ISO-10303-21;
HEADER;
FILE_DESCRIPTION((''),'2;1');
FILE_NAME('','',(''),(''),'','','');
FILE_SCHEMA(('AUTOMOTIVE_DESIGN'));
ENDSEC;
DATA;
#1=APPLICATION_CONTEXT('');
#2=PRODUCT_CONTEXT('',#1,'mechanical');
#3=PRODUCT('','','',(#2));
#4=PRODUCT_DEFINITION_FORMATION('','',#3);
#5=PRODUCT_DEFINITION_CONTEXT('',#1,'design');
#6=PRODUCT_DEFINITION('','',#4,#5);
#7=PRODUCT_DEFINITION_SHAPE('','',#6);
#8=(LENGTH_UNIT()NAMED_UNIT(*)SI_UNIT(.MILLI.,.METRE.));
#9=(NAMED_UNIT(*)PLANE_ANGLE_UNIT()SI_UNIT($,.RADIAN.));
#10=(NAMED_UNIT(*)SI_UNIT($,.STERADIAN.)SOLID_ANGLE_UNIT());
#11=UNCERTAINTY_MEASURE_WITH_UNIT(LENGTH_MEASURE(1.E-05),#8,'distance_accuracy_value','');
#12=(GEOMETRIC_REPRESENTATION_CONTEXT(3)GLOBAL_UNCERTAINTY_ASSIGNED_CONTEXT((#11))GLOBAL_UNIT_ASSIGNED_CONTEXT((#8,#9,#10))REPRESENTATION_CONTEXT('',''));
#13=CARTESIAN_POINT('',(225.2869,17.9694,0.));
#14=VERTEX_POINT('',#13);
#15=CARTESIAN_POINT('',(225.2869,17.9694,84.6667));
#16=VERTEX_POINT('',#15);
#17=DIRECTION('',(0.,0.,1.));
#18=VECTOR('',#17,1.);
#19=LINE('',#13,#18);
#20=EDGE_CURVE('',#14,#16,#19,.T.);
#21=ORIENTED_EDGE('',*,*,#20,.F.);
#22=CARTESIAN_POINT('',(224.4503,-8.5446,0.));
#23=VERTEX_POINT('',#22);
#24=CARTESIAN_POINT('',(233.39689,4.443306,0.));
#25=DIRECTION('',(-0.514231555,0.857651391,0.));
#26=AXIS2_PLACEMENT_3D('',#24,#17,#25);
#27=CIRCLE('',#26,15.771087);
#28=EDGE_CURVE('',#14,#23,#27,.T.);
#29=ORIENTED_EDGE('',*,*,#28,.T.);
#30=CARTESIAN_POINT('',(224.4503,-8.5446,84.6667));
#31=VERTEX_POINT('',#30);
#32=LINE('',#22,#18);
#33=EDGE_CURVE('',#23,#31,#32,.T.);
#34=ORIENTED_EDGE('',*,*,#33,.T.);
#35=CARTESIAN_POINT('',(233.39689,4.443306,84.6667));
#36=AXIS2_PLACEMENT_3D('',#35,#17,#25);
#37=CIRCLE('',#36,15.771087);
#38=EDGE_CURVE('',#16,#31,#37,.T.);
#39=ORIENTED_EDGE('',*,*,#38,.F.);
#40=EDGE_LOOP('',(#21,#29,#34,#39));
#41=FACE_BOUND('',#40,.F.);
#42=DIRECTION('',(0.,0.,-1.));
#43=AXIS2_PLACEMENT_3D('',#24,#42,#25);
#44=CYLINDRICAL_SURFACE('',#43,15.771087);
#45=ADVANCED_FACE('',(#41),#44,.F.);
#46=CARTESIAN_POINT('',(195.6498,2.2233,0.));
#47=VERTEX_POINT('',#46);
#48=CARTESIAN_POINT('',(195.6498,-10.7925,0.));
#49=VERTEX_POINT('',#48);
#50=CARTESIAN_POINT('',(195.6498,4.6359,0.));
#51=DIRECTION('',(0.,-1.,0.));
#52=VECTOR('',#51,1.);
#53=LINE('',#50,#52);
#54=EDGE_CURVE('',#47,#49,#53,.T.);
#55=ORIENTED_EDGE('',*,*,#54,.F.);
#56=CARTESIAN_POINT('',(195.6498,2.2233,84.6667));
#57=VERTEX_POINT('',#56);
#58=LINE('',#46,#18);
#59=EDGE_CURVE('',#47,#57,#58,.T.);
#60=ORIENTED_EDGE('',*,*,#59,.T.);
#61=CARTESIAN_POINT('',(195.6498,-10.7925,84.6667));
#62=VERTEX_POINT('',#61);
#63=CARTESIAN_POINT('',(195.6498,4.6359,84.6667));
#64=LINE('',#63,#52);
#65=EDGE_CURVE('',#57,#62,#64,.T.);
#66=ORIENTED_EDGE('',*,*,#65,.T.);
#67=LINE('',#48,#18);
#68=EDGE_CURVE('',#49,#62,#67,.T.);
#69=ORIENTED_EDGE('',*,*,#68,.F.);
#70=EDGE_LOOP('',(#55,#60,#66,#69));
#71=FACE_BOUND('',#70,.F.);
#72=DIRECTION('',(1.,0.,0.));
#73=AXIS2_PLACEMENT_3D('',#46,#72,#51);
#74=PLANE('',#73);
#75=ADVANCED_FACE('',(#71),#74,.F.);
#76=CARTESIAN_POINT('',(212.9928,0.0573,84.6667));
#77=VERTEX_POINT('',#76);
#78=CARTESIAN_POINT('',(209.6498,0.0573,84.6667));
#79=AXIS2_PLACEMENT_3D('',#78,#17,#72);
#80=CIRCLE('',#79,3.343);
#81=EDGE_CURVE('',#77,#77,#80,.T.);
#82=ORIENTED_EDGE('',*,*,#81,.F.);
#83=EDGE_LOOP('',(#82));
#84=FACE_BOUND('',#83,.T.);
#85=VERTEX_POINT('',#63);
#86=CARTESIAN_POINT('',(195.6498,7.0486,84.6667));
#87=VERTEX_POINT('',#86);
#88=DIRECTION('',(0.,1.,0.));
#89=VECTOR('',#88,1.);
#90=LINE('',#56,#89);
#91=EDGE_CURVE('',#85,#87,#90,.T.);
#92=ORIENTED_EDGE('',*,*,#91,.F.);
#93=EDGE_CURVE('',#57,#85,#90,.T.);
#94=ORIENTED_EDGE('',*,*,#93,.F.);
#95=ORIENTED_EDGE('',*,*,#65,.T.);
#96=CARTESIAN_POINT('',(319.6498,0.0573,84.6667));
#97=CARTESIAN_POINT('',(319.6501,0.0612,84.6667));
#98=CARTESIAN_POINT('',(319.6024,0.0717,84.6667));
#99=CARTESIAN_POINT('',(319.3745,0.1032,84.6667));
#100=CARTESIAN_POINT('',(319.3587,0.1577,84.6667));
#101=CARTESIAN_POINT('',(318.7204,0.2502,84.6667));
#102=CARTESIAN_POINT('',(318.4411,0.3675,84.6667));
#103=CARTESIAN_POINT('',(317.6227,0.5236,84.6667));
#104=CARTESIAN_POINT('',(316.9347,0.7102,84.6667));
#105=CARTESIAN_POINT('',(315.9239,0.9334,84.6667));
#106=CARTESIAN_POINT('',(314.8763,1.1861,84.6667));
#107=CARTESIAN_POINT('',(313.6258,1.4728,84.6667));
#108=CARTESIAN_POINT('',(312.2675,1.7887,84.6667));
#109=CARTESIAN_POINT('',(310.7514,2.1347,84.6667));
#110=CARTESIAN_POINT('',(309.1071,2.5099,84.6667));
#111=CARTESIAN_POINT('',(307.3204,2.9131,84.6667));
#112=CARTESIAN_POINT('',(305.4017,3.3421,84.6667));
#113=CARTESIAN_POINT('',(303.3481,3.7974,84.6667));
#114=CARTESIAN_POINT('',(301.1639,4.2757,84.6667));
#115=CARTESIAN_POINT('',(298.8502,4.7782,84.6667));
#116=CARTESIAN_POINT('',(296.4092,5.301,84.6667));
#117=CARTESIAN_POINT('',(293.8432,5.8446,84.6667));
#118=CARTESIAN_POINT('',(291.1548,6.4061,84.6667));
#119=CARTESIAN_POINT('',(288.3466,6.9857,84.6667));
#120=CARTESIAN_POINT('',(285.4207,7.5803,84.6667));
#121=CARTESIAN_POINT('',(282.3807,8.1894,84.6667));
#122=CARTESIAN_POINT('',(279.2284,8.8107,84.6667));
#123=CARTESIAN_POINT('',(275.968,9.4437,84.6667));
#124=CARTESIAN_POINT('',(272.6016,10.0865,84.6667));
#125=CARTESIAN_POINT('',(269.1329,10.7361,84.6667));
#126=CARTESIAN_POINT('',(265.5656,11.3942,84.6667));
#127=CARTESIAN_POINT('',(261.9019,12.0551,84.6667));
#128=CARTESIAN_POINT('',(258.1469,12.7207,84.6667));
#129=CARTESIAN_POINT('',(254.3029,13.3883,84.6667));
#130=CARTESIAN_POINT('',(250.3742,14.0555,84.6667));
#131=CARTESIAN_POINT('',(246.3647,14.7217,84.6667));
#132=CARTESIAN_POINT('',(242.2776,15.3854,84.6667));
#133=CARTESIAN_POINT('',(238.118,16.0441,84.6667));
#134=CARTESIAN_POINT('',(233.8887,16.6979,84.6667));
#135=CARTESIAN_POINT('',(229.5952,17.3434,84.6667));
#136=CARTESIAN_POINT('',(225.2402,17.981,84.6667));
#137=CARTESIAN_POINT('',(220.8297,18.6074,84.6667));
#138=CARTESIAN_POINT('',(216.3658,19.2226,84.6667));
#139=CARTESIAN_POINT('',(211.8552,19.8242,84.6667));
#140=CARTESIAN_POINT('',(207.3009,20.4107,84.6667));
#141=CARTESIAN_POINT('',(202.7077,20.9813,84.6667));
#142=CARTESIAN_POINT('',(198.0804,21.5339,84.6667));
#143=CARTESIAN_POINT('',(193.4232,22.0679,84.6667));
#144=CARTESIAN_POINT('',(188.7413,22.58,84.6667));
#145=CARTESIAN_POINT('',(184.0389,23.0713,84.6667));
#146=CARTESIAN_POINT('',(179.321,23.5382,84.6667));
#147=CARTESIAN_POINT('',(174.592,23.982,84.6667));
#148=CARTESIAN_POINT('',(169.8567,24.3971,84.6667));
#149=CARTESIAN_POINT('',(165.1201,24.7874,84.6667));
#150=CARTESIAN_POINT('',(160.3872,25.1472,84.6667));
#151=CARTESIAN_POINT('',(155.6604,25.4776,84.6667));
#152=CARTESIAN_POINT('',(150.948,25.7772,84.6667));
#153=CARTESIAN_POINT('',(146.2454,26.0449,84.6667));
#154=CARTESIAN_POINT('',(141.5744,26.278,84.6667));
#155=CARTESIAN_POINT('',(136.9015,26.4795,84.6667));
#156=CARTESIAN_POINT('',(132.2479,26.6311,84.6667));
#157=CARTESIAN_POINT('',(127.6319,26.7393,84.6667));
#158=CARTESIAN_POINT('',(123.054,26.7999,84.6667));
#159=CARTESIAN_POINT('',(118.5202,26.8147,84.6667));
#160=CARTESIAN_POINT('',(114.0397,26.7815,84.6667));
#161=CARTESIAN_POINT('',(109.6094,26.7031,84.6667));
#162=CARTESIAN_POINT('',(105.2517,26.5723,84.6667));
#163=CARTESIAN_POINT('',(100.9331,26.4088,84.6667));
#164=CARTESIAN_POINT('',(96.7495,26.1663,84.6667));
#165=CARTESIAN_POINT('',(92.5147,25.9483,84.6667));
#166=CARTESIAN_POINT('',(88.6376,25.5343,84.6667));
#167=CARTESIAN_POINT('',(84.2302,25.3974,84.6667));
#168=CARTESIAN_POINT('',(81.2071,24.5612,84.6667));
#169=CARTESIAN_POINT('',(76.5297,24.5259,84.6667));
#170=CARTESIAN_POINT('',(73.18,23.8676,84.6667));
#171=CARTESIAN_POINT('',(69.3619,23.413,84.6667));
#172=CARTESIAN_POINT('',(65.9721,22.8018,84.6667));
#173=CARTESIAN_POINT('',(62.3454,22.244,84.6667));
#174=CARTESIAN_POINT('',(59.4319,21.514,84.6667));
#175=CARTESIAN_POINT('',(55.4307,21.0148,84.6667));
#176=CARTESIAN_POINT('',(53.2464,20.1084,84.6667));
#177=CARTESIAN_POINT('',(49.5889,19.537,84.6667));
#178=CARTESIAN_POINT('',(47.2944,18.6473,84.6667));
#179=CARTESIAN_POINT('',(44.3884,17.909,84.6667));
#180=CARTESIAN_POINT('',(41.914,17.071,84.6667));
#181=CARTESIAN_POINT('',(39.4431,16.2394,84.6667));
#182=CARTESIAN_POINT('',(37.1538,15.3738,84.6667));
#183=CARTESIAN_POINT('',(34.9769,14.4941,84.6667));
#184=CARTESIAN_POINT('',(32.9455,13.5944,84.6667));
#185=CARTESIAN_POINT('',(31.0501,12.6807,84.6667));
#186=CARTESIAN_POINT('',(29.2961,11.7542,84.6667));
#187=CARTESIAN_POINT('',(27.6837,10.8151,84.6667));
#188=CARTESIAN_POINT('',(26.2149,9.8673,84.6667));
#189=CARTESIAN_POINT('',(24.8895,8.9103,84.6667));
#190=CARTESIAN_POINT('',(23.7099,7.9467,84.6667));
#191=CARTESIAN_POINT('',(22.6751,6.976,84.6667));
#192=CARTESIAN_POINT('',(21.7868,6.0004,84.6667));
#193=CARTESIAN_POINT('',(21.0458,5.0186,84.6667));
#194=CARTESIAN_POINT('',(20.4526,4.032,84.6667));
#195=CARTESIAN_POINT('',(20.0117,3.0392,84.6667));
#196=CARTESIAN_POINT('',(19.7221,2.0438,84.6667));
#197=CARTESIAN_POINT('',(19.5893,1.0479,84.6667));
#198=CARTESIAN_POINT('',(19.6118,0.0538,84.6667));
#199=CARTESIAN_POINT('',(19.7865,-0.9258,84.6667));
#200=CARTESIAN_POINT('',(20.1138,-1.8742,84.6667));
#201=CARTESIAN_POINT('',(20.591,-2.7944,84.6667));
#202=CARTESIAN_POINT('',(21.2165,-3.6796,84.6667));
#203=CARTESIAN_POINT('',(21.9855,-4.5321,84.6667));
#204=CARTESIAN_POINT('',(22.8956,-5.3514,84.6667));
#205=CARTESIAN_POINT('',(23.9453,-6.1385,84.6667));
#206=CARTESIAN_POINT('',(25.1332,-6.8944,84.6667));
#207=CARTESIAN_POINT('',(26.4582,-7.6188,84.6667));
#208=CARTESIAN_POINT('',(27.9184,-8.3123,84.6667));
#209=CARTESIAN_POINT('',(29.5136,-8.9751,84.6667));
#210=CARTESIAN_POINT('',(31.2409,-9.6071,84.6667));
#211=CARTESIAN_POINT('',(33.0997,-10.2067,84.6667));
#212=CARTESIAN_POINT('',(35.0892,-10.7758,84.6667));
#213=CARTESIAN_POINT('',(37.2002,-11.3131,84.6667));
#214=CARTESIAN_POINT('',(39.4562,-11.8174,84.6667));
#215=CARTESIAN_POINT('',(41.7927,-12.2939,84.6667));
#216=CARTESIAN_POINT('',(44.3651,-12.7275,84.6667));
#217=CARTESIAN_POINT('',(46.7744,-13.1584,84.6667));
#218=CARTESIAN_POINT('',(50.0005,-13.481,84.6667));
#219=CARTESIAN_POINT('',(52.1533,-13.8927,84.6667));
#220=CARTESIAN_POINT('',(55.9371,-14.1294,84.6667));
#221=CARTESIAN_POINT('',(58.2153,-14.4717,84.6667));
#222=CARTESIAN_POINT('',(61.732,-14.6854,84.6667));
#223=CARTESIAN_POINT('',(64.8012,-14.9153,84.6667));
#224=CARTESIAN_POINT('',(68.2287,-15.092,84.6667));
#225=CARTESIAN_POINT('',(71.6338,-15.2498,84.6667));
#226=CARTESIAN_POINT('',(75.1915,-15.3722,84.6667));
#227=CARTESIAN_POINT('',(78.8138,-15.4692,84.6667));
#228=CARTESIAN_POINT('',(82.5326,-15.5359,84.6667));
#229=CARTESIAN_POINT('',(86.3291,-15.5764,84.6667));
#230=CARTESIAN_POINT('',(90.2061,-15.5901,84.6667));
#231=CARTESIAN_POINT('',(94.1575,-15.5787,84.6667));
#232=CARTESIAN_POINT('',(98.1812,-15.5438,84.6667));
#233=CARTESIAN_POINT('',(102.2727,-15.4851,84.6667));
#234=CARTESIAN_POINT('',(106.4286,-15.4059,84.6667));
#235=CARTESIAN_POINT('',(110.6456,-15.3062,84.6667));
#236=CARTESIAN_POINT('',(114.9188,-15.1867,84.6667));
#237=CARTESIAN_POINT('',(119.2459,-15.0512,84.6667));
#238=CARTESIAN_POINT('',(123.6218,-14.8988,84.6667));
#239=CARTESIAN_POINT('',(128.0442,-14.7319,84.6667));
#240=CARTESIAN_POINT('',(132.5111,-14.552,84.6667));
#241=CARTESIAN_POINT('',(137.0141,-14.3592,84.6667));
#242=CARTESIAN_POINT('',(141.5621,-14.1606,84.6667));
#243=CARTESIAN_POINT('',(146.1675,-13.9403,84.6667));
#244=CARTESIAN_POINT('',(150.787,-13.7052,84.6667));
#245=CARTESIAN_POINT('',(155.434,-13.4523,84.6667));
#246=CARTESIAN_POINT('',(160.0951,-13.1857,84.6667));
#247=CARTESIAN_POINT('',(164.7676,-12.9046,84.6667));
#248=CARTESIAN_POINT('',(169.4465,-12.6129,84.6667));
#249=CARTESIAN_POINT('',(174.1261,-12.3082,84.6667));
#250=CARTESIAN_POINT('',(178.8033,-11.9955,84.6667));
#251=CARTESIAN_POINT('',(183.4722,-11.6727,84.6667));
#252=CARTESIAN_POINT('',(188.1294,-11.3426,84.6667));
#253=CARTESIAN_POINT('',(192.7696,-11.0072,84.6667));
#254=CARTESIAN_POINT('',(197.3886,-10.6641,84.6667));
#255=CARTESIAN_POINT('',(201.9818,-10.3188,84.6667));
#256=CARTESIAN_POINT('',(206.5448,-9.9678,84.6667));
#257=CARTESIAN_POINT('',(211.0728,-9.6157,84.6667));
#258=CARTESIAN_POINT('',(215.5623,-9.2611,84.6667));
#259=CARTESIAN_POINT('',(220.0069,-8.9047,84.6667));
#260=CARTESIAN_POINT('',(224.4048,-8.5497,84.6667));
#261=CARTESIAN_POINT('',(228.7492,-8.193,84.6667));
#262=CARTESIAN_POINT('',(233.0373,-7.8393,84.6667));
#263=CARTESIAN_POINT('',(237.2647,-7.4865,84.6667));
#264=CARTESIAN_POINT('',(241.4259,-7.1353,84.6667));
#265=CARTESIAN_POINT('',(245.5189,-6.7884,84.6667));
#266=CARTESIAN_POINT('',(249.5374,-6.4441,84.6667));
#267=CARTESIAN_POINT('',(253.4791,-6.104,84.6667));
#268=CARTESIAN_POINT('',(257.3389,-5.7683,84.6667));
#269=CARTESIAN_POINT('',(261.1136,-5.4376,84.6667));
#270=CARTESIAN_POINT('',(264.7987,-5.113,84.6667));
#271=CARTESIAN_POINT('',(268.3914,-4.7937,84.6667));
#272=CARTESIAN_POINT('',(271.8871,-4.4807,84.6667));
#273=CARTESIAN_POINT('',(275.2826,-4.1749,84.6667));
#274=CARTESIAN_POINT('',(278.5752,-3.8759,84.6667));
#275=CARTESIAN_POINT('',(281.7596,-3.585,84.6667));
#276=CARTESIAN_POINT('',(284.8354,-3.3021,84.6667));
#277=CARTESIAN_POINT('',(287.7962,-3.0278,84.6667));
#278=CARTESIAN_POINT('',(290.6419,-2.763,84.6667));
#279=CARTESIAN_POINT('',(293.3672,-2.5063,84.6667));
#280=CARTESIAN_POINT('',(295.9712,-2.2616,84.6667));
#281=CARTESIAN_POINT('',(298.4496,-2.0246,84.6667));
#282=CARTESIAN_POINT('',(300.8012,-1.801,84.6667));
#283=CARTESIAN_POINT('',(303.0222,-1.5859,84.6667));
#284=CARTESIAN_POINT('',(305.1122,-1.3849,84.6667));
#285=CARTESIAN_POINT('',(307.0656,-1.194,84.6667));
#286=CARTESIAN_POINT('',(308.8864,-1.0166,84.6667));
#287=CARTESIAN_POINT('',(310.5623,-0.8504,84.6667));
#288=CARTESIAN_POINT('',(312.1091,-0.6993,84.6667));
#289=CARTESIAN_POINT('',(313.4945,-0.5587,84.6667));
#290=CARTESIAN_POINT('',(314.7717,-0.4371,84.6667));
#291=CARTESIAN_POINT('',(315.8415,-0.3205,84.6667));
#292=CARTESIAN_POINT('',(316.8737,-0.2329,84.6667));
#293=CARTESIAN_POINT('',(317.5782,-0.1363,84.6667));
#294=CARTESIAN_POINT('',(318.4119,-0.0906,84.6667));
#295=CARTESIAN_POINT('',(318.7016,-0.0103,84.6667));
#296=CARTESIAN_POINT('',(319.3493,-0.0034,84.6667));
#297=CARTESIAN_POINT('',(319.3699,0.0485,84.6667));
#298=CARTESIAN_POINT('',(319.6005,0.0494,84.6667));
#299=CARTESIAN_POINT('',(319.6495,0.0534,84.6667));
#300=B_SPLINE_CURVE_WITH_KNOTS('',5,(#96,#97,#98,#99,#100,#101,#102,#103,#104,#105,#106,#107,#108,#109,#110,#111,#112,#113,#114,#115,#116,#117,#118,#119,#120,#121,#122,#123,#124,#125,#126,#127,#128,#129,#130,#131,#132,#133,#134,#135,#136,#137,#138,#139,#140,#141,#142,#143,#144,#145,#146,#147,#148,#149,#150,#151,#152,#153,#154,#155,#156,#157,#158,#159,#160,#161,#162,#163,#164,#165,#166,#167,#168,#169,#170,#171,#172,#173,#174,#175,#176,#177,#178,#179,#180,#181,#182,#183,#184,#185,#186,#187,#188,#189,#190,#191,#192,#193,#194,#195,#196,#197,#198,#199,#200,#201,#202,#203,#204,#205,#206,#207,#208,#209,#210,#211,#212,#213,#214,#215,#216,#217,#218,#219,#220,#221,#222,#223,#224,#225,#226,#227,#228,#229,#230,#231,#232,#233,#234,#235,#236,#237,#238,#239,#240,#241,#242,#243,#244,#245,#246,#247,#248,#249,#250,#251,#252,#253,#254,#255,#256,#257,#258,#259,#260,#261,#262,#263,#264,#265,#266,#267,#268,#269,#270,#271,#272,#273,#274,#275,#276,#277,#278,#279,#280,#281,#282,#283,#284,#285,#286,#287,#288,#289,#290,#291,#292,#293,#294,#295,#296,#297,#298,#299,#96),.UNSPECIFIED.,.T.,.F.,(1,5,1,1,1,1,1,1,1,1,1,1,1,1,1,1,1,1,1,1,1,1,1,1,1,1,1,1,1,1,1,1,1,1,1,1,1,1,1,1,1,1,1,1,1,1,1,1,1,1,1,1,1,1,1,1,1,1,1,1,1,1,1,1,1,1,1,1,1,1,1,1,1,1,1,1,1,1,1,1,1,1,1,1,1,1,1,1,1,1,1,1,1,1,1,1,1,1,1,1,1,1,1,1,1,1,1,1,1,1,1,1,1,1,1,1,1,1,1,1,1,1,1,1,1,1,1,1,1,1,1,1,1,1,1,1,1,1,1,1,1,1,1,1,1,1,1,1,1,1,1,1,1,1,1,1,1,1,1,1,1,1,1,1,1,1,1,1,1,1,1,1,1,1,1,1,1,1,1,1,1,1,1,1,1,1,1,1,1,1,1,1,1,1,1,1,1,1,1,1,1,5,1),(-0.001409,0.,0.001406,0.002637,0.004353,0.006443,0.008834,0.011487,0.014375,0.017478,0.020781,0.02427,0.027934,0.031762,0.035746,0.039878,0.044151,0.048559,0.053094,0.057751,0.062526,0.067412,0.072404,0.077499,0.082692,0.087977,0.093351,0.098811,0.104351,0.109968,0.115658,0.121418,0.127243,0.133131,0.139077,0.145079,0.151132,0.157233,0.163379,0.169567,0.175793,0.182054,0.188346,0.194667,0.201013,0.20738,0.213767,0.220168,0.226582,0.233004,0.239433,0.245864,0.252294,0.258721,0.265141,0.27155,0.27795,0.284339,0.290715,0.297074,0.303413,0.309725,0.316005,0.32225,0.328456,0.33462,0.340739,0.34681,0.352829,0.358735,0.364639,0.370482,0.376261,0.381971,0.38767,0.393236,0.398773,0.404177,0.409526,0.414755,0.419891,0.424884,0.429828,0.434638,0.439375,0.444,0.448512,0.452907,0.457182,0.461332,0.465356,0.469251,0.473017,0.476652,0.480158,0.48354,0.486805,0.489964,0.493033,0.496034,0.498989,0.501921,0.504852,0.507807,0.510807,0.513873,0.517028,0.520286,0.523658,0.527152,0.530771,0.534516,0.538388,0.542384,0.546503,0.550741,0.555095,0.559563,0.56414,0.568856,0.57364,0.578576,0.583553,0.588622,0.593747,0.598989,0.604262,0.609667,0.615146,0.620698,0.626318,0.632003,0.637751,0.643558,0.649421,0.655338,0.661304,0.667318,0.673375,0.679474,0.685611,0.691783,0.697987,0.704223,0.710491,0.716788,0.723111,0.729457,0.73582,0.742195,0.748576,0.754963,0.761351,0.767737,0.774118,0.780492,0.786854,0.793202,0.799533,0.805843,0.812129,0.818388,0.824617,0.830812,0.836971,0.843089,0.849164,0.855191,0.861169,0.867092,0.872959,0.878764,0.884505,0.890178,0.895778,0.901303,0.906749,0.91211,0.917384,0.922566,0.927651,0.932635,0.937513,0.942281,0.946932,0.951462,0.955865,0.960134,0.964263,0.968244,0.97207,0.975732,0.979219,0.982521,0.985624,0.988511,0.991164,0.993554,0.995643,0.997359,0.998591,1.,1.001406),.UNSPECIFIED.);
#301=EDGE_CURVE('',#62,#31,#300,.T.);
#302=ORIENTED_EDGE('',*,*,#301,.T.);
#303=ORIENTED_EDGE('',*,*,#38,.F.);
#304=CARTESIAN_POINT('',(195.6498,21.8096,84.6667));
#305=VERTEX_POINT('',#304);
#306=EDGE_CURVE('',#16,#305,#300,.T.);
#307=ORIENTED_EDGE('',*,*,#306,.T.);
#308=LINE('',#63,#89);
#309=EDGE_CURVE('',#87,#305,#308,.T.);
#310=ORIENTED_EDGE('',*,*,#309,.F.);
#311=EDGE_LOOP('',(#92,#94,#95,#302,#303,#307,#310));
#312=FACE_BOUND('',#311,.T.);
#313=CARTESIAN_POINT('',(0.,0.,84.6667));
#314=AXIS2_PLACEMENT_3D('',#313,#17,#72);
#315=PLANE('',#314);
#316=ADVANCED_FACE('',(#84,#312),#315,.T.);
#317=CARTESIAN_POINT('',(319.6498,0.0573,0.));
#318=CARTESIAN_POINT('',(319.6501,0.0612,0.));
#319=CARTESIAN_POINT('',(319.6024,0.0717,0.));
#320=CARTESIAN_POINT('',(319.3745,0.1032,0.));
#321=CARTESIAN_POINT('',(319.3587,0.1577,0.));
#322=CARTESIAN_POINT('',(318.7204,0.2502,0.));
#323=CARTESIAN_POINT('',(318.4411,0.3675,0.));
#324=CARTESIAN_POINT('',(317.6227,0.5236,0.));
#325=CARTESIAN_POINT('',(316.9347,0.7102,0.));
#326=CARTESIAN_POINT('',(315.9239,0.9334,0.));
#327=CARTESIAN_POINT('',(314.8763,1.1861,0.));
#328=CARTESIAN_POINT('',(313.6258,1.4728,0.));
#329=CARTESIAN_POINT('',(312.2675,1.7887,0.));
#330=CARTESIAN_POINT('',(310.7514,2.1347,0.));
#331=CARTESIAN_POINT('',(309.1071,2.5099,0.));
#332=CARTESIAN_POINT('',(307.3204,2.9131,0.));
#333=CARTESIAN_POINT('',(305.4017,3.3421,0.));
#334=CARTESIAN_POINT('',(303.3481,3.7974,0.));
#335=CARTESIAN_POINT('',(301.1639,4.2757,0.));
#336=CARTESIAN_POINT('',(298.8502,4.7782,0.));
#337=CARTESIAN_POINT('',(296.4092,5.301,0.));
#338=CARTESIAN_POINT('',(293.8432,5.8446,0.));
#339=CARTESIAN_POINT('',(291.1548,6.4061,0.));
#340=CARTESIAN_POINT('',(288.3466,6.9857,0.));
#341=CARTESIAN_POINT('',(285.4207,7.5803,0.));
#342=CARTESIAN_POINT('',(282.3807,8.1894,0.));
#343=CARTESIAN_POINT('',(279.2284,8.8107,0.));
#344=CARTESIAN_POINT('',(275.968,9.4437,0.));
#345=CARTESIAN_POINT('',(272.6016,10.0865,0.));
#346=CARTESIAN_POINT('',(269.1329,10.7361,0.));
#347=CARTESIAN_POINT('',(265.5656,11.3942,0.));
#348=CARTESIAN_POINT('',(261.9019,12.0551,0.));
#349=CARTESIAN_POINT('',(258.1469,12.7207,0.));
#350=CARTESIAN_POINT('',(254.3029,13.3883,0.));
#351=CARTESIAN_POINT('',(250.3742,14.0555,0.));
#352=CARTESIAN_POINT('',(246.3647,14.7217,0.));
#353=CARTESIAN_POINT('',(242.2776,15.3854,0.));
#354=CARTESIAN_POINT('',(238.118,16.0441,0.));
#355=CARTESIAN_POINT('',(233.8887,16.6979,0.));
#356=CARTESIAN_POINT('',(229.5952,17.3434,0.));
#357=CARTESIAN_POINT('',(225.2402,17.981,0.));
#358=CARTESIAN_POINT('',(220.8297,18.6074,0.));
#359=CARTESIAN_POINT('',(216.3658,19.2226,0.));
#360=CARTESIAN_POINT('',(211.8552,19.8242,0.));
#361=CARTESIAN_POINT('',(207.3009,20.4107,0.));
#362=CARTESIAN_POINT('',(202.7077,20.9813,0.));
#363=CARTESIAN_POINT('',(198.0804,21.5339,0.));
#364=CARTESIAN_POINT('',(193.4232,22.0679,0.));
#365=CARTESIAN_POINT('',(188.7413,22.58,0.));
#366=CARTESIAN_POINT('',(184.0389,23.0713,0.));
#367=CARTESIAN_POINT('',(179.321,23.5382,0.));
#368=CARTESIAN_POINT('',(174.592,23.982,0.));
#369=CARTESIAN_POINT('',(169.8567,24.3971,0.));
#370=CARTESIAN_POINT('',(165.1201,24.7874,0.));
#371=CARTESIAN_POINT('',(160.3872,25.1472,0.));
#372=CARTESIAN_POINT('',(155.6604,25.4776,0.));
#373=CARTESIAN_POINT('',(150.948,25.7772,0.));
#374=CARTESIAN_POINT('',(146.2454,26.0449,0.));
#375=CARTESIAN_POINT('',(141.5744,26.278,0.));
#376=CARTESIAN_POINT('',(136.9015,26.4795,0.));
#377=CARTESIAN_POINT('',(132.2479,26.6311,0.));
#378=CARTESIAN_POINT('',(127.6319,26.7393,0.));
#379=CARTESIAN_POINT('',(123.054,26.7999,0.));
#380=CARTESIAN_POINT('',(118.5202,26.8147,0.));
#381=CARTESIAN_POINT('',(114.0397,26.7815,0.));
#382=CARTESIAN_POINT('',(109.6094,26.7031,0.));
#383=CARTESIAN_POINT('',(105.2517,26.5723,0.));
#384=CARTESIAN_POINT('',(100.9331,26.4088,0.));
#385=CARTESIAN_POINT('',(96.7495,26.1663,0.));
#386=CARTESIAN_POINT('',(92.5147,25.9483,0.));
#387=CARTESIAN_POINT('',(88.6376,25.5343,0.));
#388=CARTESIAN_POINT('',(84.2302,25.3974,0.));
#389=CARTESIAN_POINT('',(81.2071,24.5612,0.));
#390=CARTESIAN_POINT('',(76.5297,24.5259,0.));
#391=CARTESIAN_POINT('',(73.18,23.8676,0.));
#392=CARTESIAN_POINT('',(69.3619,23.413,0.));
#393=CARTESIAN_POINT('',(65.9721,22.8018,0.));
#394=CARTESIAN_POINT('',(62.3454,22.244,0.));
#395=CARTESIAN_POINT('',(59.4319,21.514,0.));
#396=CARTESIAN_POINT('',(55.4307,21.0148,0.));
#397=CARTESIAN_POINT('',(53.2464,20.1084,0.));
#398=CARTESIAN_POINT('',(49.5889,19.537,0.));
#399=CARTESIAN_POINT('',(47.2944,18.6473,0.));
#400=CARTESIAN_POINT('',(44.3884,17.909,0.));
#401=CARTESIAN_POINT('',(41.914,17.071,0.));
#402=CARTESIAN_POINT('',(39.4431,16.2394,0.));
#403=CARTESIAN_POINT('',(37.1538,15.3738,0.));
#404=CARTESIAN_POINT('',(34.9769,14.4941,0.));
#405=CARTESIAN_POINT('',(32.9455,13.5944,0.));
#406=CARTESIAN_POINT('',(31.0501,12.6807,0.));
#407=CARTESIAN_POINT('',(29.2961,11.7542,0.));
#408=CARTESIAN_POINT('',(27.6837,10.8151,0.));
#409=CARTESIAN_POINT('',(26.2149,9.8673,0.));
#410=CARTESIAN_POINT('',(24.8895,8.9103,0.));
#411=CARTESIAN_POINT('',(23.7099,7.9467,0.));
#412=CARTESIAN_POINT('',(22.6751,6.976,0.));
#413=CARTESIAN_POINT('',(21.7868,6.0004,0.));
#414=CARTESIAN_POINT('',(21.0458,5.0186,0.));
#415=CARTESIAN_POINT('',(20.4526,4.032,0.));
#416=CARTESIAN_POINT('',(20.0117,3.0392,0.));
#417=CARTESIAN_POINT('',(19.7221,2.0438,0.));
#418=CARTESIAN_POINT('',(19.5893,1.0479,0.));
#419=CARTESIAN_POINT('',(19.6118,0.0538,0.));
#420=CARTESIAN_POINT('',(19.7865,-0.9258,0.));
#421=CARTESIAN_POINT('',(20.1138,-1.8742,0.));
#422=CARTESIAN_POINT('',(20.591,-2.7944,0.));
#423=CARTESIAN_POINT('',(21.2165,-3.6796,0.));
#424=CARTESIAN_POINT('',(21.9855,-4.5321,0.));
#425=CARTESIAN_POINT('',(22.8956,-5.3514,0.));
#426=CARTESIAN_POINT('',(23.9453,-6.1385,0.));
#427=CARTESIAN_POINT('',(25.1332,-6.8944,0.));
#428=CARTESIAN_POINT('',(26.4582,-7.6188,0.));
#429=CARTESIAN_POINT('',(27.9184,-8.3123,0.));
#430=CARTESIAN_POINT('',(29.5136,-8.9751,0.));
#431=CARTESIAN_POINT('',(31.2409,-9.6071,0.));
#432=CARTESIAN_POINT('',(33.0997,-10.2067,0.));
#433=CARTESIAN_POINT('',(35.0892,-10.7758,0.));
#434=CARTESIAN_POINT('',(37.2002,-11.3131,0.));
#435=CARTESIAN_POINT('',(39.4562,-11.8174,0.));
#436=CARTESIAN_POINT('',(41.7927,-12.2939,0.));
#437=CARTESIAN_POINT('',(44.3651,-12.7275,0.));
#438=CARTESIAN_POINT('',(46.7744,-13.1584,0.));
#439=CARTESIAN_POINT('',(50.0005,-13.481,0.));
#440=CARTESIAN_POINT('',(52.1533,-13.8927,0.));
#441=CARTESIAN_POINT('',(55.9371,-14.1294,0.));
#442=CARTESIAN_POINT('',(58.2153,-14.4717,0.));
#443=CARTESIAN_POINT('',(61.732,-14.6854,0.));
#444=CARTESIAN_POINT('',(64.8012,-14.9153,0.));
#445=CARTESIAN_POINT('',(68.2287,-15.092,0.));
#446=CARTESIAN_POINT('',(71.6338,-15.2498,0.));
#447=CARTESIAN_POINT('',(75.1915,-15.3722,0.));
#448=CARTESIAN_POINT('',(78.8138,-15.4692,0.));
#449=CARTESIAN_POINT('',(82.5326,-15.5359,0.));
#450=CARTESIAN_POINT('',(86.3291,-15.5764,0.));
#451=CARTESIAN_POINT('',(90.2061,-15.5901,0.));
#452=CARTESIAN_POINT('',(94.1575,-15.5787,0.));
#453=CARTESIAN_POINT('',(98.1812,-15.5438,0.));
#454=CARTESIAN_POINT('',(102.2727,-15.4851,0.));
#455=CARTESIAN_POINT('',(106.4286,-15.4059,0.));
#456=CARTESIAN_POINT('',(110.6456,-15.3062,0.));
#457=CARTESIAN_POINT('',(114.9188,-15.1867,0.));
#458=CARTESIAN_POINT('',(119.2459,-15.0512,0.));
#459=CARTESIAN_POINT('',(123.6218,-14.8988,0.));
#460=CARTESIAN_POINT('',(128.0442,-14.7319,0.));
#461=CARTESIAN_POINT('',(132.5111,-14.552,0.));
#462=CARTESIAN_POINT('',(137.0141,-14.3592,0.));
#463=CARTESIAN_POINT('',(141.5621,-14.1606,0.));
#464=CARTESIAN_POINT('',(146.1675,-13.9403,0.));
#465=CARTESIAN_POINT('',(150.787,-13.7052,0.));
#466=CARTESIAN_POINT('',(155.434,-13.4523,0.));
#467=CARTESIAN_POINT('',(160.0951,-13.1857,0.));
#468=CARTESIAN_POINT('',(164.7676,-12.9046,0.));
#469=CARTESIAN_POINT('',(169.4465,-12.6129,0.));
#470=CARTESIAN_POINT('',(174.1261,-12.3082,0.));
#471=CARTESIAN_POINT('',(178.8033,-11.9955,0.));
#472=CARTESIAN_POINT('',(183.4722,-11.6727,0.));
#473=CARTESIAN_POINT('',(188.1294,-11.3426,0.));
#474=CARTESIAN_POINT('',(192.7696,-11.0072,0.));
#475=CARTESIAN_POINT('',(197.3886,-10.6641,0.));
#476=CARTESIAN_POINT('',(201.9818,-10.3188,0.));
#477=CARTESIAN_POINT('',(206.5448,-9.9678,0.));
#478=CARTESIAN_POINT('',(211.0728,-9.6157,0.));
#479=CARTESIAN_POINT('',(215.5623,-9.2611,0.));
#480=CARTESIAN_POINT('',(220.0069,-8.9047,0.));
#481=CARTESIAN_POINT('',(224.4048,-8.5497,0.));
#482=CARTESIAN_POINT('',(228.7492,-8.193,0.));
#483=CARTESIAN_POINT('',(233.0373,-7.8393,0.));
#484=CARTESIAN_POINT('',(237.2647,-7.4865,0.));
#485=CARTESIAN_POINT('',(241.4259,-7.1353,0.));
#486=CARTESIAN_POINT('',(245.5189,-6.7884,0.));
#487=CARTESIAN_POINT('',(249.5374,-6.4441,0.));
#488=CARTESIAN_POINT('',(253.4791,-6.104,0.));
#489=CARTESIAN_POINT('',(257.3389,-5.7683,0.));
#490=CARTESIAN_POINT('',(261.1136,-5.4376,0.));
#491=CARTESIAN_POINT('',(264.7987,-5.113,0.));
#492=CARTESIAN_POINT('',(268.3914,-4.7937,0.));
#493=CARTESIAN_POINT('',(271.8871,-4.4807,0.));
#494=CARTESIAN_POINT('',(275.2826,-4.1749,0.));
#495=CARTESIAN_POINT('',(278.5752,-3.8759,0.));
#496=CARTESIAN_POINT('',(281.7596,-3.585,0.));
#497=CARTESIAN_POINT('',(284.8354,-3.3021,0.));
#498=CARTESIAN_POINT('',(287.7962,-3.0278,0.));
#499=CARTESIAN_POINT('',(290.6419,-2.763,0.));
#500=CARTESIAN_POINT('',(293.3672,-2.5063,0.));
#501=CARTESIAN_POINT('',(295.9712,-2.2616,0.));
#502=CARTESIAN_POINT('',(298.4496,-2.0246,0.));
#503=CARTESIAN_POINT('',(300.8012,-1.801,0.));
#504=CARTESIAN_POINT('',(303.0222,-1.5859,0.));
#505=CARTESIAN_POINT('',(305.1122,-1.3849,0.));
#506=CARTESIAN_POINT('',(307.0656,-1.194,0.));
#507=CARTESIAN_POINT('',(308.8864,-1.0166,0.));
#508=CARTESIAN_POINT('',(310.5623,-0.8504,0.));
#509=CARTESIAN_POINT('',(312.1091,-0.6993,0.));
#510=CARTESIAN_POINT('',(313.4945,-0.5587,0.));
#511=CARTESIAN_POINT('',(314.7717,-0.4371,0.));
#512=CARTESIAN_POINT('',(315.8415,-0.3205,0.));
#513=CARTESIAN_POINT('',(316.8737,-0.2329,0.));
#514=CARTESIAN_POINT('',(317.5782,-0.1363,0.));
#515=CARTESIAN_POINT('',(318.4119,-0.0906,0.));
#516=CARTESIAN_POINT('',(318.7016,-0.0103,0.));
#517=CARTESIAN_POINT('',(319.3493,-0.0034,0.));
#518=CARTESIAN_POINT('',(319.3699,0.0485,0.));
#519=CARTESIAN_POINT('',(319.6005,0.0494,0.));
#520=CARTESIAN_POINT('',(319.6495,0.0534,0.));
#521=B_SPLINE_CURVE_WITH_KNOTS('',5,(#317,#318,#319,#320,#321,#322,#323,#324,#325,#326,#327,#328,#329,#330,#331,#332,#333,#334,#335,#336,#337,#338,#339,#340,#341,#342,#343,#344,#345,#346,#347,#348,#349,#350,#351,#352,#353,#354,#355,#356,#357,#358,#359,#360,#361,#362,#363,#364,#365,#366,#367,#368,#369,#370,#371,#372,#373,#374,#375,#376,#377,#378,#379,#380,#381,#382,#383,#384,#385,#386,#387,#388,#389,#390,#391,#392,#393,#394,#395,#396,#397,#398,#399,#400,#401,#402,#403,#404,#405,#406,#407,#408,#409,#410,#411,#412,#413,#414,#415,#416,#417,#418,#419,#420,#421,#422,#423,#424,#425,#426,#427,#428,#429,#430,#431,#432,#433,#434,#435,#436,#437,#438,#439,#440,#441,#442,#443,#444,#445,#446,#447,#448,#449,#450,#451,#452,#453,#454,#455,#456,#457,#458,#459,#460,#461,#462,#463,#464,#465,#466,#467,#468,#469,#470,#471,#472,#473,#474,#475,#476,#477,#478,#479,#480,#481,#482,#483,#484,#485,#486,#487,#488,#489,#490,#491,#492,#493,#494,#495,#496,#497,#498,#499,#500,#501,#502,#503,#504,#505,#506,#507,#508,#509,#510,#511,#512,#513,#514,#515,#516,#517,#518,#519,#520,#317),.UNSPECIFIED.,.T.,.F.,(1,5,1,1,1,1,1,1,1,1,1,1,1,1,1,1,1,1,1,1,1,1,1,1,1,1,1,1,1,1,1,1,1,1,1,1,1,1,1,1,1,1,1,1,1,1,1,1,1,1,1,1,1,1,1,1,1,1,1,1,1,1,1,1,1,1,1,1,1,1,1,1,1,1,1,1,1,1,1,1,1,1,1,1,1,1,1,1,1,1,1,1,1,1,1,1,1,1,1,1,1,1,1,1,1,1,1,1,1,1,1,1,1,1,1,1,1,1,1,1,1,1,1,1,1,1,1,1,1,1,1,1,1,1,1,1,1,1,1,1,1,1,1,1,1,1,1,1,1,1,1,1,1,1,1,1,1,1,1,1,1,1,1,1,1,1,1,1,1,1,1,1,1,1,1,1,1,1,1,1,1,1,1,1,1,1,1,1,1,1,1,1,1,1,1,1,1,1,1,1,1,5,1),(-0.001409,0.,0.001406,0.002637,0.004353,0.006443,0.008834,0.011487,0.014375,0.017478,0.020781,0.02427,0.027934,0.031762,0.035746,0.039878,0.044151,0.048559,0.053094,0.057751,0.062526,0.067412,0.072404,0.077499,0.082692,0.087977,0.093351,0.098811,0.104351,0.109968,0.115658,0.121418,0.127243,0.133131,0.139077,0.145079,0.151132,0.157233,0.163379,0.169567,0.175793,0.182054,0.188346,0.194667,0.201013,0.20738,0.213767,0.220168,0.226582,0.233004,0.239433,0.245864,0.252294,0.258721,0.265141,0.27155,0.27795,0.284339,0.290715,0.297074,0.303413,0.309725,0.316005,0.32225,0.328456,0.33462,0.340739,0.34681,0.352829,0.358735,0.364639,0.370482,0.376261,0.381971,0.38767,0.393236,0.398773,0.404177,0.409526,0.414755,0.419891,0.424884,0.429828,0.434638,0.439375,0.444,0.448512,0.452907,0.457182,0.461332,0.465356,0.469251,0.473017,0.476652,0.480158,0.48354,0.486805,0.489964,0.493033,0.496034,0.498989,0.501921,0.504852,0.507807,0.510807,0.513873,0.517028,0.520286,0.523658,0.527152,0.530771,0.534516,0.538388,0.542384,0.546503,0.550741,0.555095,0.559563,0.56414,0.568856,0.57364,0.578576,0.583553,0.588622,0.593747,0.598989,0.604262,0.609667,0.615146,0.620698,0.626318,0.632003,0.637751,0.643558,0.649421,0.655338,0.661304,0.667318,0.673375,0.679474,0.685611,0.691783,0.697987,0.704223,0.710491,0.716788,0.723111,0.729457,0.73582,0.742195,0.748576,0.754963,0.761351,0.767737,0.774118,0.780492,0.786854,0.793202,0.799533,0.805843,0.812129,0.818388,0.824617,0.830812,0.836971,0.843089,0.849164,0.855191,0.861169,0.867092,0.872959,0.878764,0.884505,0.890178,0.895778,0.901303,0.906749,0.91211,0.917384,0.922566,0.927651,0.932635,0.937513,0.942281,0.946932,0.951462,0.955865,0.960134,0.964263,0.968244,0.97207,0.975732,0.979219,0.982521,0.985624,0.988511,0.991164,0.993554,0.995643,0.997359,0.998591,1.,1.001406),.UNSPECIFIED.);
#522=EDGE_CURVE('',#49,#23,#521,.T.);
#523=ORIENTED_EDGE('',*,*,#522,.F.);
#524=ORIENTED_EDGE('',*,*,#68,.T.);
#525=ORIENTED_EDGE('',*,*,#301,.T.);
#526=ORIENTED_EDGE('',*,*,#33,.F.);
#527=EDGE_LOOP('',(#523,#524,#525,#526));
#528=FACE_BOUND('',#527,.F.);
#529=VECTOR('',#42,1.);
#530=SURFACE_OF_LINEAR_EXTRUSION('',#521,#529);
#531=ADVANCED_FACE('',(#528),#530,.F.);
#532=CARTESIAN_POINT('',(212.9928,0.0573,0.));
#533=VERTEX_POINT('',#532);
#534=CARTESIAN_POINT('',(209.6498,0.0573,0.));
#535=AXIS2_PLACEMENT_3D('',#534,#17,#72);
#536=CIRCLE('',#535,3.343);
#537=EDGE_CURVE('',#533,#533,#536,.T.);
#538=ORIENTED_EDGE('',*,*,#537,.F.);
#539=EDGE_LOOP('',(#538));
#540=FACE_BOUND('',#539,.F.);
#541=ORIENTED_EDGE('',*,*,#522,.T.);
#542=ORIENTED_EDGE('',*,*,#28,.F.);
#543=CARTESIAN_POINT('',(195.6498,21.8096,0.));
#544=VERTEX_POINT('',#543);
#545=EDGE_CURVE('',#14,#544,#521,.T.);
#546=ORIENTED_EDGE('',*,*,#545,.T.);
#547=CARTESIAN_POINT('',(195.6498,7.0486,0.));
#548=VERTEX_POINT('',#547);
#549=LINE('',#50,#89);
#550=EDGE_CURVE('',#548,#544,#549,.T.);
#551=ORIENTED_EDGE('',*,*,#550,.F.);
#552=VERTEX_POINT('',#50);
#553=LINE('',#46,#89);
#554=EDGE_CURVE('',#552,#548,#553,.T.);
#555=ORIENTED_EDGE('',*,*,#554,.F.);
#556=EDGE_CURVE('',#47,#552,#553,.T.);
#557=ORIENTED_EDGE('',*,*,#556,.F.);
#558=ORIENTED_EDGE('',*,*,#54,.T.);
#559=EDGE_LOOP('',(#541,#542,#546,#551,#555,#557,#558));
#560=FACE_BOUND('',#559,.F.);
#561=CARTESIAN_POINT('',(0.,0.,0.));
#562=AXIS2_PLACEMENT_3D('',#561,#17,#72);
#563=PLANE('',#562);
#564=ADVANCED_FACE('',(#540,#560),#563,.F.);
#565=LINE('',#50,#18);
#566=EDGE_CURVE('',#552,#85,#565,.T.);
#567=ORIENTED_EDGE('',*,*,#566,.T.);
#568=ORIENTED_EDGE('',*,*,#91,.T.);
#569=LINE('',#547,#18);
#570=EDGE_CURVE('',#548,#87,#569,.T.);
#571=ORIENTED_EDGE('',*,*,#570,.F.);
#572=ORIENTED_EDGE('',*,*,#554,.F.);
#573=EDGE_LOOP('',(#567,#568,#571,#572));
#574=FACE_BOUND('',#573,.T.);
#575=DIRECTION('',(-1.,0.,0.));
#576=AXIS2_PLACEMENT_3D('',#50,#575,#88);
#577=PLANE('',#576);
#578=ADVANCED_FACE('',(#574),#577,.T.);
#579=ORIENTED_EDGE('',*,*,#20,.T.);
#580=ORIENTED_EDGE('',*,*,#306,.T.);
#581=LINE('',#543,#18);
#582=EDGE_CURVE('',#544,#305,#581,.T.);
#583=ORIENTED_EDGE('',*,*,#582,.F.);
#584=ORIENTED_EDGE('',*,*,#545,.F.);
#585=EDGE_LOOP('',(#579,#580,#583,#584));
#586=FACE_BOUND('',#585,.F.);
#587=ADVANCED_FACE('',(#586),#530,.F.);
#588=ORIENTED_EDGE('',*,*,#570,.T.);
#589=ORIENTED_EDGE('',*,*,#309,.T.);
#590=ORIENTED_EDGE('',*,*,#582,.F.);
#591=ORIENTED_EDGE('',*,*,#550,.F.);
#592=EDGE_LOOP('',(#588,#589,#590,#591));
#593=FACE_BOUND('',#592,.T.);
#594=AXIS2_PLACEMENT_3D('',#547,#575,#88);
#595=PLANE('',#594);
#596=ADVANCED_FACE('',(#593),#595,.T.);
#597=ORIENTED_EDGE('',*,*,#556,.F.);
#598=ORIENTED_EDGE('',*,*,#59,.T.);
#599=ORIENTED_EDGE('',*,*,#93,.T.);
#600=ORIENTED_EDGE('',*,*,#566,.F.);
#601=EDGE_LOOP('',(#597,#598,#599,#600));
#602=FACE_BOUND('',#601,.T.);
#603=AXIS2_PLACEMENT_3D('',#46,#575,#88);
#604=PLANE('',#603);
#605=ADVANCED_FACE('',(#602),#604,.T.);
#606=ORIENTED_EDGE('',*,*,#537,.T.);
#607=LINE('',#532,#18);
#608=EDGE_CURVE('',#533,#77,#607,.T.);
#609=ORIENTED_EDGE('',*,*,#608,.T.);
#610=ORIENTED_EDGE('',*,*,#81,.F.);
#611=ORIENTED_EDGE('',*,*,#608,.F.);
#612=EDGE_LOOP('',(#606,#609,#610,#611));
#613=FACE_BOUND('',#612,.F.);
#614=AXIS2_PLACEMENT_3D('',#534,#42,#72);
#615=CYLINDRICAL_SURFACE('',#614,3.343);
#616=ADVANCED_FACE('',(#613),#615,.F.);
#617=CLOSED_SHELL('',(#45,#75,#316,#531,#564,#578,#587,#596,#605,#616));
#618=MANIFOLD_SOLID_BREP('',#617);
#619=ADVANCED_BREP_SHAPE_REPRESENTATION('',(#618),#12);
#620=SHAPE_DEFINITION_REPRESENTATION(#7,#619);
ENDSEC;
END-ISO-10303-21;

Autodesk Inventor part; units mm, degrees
ref_plane "YZ Plane" through (0, 0, 0) normal (1, 0, 0) x (0, 1, 0)
ref_plane "XZ Plane" through (0, 0, 0) normal (0, 1, 0) x (-1, 0, 0)
ref_plane "XY Plane" through (0, 0, 0) normal (0, 0, 1) x (1, 0, 0)
sketch "Sketch2" plane through (0, 0, 0) normal (0, 0, 1) x (1, 0, 0)
  spline S0 degree 5 poles (319.6498, 0.0573) (319.6501, 0.0612) (319.6024, 0.0717) (319.3745, 0.1032) (319.3587, 0.1577) (318.7204, 0.2502) (318.4411, 0.3675) (317.6227, 0.5236) (316.9347, 0.7102) (315.9239, 0.9334) (314.8763, 1.1861) (313.6258, 1.4728) (312.2675, 1.7887) (310.7514, 2.1347) (309.1071, 2.5099) (307.3204, 2.9131) (305.4017, 3.3421) (303.3481, 3.7974) (301.1639, 4.2757) (298.8502, 4.7782) (296.4092, 5.301) (293.8432, 5.8446) (291.1548, 6.4061) (288.3466, 6.9857) (285.4207, 7.5803) (282.3807, 8.1894) (279.2284, 8.8107) (275.968, 9.4437) (272.6016, 10.0865) (269.1329, 10.7361) (265.5656, 11.3942) (261.9019, 12.0551) (258.1469, 12.7207) (254.3029, 13.3883) (250.3742, 14.0555) (246.3647, 14.7217) (242.2776, 15.3854) (238.118, 16.0441) (233.8887, 16.6979) (229.5952, 17.3434) (225.2402, 17.981) (220.8297, 18.6074) (216.3658, 19.2226) (211.8552, 19.8242) (207.3009, 20.4107) (202.7077, 20.9813) (198.0804, 21.5339) (193.4232, 22.0679) (188.7413, 22.58) (184.0389, 23.0713) (179.321, 23.5382) (174.592, 23.982) (169.8567, 24.3971) (165.1201, 24.7874) (160.3872, 25.1472) (155.6604, 25.4776) (150.948, 25.7772) (146.2454, 26.0449) (141.5744, 26.278) (136.9015, 26.4795) (132.2479, 26.6311) (127.6319, 26.7393) (123.054, 26.7999) (118.5202, 26.8147) (114.0397, 26.7815) (109.6094, 26.7031) (105.2517, 26.5723) (100.9331, 26.4088) (96.7495, 26.1663) (92.5147, 25.9483) (88.6376, 25.5343) (84.2302, 25.3974) (81.2071, 24.5612) (76.5297, 24.5259) (73.18, 23.8676) (69.3619, 23.413) (65.9721, 22.8018) (62.3454, 22.244) (59.4319, 21.514) (55.4307, 21.0148) (53.2464, 20.1084) (49.5889, 19.537) (47.2944, 18.6473) (44.3884, 17.909) (41.914, 17.071) (39.4431, 16.2394) (37.1538, 15.3738) (34.9769, 14.4941) (32.9455, 13.5944) (31.0501, 12.6807) (29.2961, 11.7542) (27.6837, 10.8151) (26.2149, 9.8673) (24.8895, 8.9103) (23.7099, 7.9467) (22.6751, 6.976) (21.7868, 6.0004) (21.0458, 5.0186) (20.4526, 4.032) (20.0117, 3.0392) (19.7221, 2.0438) (19.5893, 1.0479) (19.6118, 0.0538) (19.7865, -0.9258) (20.1138, -1.8742) (20.591, -2.7944) (21.2165, -3.6796) (21.9855, -4.5321) (22.8956, -5.3514) (23.9453, -6.1385) (25.1332, -6.8944) (26.4582, -7.6188) (27.9184, -8.3123) (29.5136, -8.9751) (31.2409, -9.6071) (33.0997, -10.2067) (35.0892, -10.7758) (37.2002, -11.3131) (39.4562, -11.8174) (41.7927, -12.2939) (44.3651, -12.7275) (46.7744, -13.1584) (50.0005, -13.481) (52.1533, -13.8927) (55.9371, -14.1294) (58.2153, -14.4717) (61.732, -14.6854) (64.8012, -14.9153) (68.2287, -15.092) (71.6338, -15.2498) (75.1915, -15.3722) (78.8138, -15.4692) (82.5326, -15.5359) (86.3291, -15.5764) (90.2061, -15.5901) (94.1575, -15.5787) (98.1812, -15.5438) (102.2727, -15.4851) (106.4286, -15.4059) (110.6456, -15.3062) (114.9188, -15.1867) (119.2459, -15.0512) (123.6218, -14.8988) (128.0442, -14.7319) (132.5111, -14.552) (137.0141, -14.3592) (141.5621, -14.1606) (146.1675, -13.9403) (150.787, -13.7052) (155.434, -13.4523) (160.0951, -13.1857) (164.7676, -12.9046) (169.4465, -12.6129) (174.1261, -12.3082) (178.8033, -11.9955) (183.4722, -11.6727) (188.1294, -11.3426) (192.7696, -11.0072) (197.3886, -10.6641) (201.9818, -10.3188) (206.5448, -9.9678) (211.0728, -9.6157) (215.5623, -9.2611) (220.0069, -8.9047) (224.4048, -8.5497) (228.7492, -8.193) (233.0373, -7.8393) (237.2647, -7.4865) (241.4259, -7.1353) (245.5189, -6.7884) (249.5374, -6.4441) (253.4791, -6.104) (257.3389, -5.7683) (261.1136, -5.4376) (264.7987, -5.113) (268.3914, -4.7937) (271.8871, -4.4807) (275.2826, -4.1749) (278.5752, -3.8759) (281.7596, -3.585) (284.8354, -3.3021) (287.7962, -3.0278) (290.6419, -2.763) (293.3672, -2.5063) (295.9712, -2.2616) (298.4496, -2.0246) (300.8012, -1.801) (303.0222, -1.5859) (305.1122, -1.3849) (307.0656, -1.194) (308.8864, -1.0166) (310.5623, -0.8504) (312.1091, -0.6993) (313.4945, -0.5587) (314.7717, -0.4371) (315.8415, -0.3205) (316.8737, -0.2329) (317.5782, -0.1363) (318.4119, -0.0906) (318.7016, -0.0103) (319.3493, -0.0034) (319.3699, 0.0485) (319.6005, 0.0494) (319.6495, 0.0534) (319.6498, 0.0573) knots 0 0 0 0 0 0 0.001406 0.002637 0.004353 0.006443 0.008834 0.011487 0.014375 0.017478 0.020781 0.02427 0.027934 0.031762 0.035746 0.039878 0.044151 0.048559 0.053094 0.057751 0.062526 0.067412 0.072404 0.077499 0.082692 0.087977 0.093351 0.098811 0.104351 0.109968 0.115658 0.121418 0.127243 0.133131 0.139077 0.145079 0.151132 0.157233 0.163379 0.169567 0.175793 0.182054 0.188346 0.194667 0.201013 0.20738 0.213767 0.220168 0.226582 0.233004 0.239433 0.245864 0.252294 0.258721 0.265141 0.27155 0.27795 0.284339 0.290715 0.297074 0.303413 0.309725 0.316005 0.32225 0.328456 0.33462 0.340739 0.34681 0.352829 0.358735 0.364639 0.370482 0.376261 0.381971 0.38767 0.393236 0.398773 0.404177 0.409526 0.414755 0.419891 0.424884 0.429828 0.434638 0.439375 0.444 0.448512 0.452907 0.457182 0.461332 0.465356 0.469251 0.473017 0.476652 0.480158 0.48354 0.486805 0.489964 0.493033 0.496034 0.498989 0.501921 0.504852 0.507807 0.510807 0.513873 0.517028 0.520286 0.523658 0.527152 0.530771 0.534516 0.538388 0.542384 0.546503 0.550741 0.555095 0.559563 0.56414 0.568856 0.57364 0.578576 0.583553 0.588622 0.593747 0.598989 0.604262 0.609667 0.615146 0.620698 0.626318 0.632003 0.637751 0.643558 0.649421 0.655338 0.661304 0.667318 0.673375 0.679474 0.685611 0.691783 0.697987 0.704223 0.710491 0.716788 0.723111 0.729457 0.73582 0.742195 0.748576 0.754963 0.761351 0.767737 0.774118 0.780492 0.786854 0.793202 0.799533 0.805843 0.812129 0.818388 0.824617 0.830812 0.836971 0.843089 0.849164 0.855191 0.861169 0.867092 0.872959 0.878764 0.884505 0.890178 0.895778 0.901303 0.906749 0.91211 0.917384 0.922566 0.927651 0.932635 0.937513 0.942281 0.946932 0.951462 0.955865 0.960134 0.964263 0.968244 0.97207 0.975732 0.979219 0.982521 0.985624 0.988511 0.991164 0.993554 0.995643 0.997359 0.998591 1 1 1 1 1 1
  circle A0 centre (79.5135, 4.6359) radius 11.959
  line L0 (79.5135, 4.6359) -> (79.5135, 24.6083) construction
  circle A1 centre (209.6498, 0.0573) radius 3.343
  line L1 (79.5135, 4.6359) -> (209.6498, 4.6359) construction
  line L2 (319.6498, 0.0573) -> (219.6498, 0.0573) construction
  line L3 (219.6499, 18.7671) -> (219.6499, -8.9327) construction
  line L4 (28.0055, 4.5054) -> (28.0055, -2.4946)
  line L5 (19.627, 1.0326) -> (319.6498, 0.0573) construction
  line L6 (49.7105, 14.4213) -> (55.6079, 14.4213)
  line L7 (49.7104, -8.4915) -> (55.6078, -8.4915)
  line L8 (28.0055, 4.5054) -> (49.7105, 14.4213)
  line L9 (28.0055, -2.4946) -> (49.7104, -8.4915)
  line L10 (55.6079, 14.4213) -> (55.6079, 20.8726)
  line L11 (55.6078, -8.4915) -> (55.6078, -14.1513)
  line L12 (108.6496, 16.398) -> (108.6496, -7.1261)
  line L13 (110.8735, -9.1136) -> (193.8736, 0.2359)
  line L14 (195.6498, 2.2233) -> (195.6498, 7.0486)
  line L15 (193.8736, 9.036) -> (110.8735, 18.3854)
  arc A2 (110.8735, 18.3854) -> (108.6496, 16.398) centre (110.6496, 16.398) ccw
  arc A3 (108.6496, -7.1261) -> (110.8735, -9.1136) centre (110.6496, -7.1261) ccw
  arc A4 (193.8736, 0.2359) -> (195.6498, 2.2233) centre (193.6498, 2.2233) ccw
  arc A5 (195.6498, 7.0486) -> (193.8736, 9.036) centre (193.6498, 7.0486) ccw
  arc A6 (225.2869, 17.9694) -> (224.4503, -8.5446) centre (233.3969, 4.4433) ccw
  line L16 (195.6498, 4.6359) -> (195.6498, -10.7925)
  line L17 (195.6498, 4.6359) -> (195.6498, 21.8096)
  point P0 (0, 0)
  point P1 (319.3573, 0.1272)
  point P2 (318.9918, 0.2142)
  point P3 (318.4802, 0.3354)
  point P4 (317.8238, 0.4911)
  point P5 (317.0222, 0.6801)
  point P6 (316.0769, 0.9024)
  point P7 (314.9885, 1.1568)
  point P8 (313.7582, 1.443)
  point P9 (312.3866, 1.7598)
  point P10 (310.8752, 2.1063)
  point P11 (309.2258, 2.4819)
  point P12 (307.4393, 2.8854)
  point P13 (305.5178, 3.3153)
  point P14 (303.4628, 3.7707)
  point P15 (301.2764, 4.2501)
  point P16 (298.9607, 4.7526)
  point P17 (296.5175, 5.2764)
  point P18 (293.9492, 5.8203)
  point P19 (291.2585, 6.3828)
  point P20 (288.4478, 6.9627)
  point P21 (285.5195, 7.5582)
  point P22 (282.4766, 8.1678)
  point P23 (279.3218, 8.79)
  point P24 (276.0584, 9.4236)
  point P25 (272.6891, 10.0668)
  point P26 (269.2175, 10.7178)
  point P27 (265.6469, 11.3757)
  point P28 (261.9803, 12.0381)
  point P29 (258.2219, 12.7041)
  point P30 (254.3747, 13.3722)
  point P31 (250.4426, 14.0403)
  point P32 (246.4295, 14.7072)
  point P33 (242.339, 15.3714)
  point P34 (238.1756, 16.0311)
  point P35 (233.9428, 16.6851)
  point P36 (229.6454, 17.3316)
  point P37 (220.8723, 18.5967)
  point P38 (216.4049, 19.2123)
  point P39 (211.8901, 19.8144)
  point P40 (207.332, 20.4015)
  point P41 (202.7347, 20.9724)
  point P42 (198.1034, 21.5256)
  point P43 (193.4423, 22.0596)
  point P44 (188.7563, 22.5726)
  point P45 (184.0499, 23.0637)
  point P46 (179.3279, 23.5314)
  point P47 (174.5948, 23.9745)
  point P48 (169.8554, 24.3909)
  point P49 (165.1148, 24.7803)
  point P50 (160.3775, 25.1406)
  point P51 (155.6479, 25.4709)
  point P52 (150.9316, 25.7703)
  point P53 (146.233, 26.0373)
  point P54 (141.557, 26.2707)
  point P55 (136.882, 26.4681)
  point P56 (132.2209, 26.6211)
  point P57 (127.5964, 26.7282)
  point P58 (123.0133, 26.7888)
  point P59 (118.4761, 26.8026)
  point P60 (113.9902, 26.7693)
  point P61 (109.5601, 26.6886)
  point P62 (105.191, 26.5611)
  point P63 (100.8866, 26.3866)
  point P64 (96.6524, 26.1647)
  point P65 (92.4927, 25.8975)
  point P66 (88.4121, 25.5832)
  point P67 (84.4152, 25.2282)
  point P68 (80.9052, 24.7441)
  point P69 (76.6873, 24.3761)
  point P70 (72.9635, 23.8905)
  point P71 (69.3402, 23.3611)
  point P72 (65.8208, 22.7938)
  point P73 (62.4086, 22.1883)
  point P74 (59.107, 21.5464)
  point P75 (52.8493, 20.1606)
  point P76 (49.7105, 19.4213)
  point P77 (47.0737, 18.6507)
  point P78 (44.3741, 17.8542)
  point P79 (41.8034, 17.0322)
  point P80 (39.3638, 16.1874)
  point P81 (37.0583, 15.3213)
  point P82 (34.8884, 14.4363)
  point P83 (32.8568, 13.534)
  point P84 (30.965, 12.6166)
  point P85 (29.2145, 11.686)
  point P86 (27.6071, 10.7437)
  point P87 (26.1443, 9.7921)
  point P88 (24.8269, 8.8324)
  point P89 (23.6566, 7.8664)
  point P90 (22.6336, 6.8953)
  point P91 (21.7591, 5.9209)
  point P92 (21.0334, 4.9441)
  point P93 (20.4571, 3.9661)
  point P94 (20.0308, 2.9875)
  point P95 (19.7539, 2.0098)
  point P96 (19.6496, 0.0573)
  point P97 (19.8205, -0.9033)
  point P98 (20.1376, -1.8357)
  point P99 (20.6002, -2.7402)
  point P100 (21.208, -3.6159)
  point P101 (21.9598, -4.4628)
  point P102 (22.8544, -5.2806)
  point P103 (23.8909, -6.069)
  point P104 (25.0681, -6.8277)
  point P105 (26.3846, -7.5561)
  point P106 (27.8384, -8.2539)
  point P107 (29.4284, -8.9211)
  point P108 (31.1522, -9.5571)
  point P109 (33.0086, -10.1613)
  point P110 (34.9949, -10.734)
  point P111 (37.1093, -11.2746)
  point P112 (39.3497, -11.7828)
  point P113 (41.7134, -12.2586)
  point P114 (44.198, -12.702)
  point P115 (46.8014, -13.1127)
  point P116 (49.7104, -13.4915)
  point P117 (52.3532, -13.8357)
  point P118 (58.3469, -14.4294)
  point P119 (61.5023, -14.6781)
  point P120 (64.7591, -14.8953)
  point P121 (68.1149, -15.0813)
  point P122 (71.5661, -15.237)
  point P123 (75.1094, -15.3627)
  point P124 (78.7418, -15.4596)
  point P125 (82.46, -15.528)
  point P126 (86.2607, -15.5691)
  point P127 (90.14, -15.5838)
  point P128 (94.0946, -15.5733)
  point P129 (98.1212, -15.5388)
  point P130 (102.2159, -15.4812)
  point P131 (106.3751, -15.4023)
  point P132 (110.5952, -15.303)
  point P133 (114.872, -15.1845)
  point P134 (119.2022, -15.0489)
  point P135 (123.5813, -14.8971)
  point P136 (128.006, -14.7306)
  point P137 (132.4718, -14.5509)
  point P138 (136.9748, -14.3598)
  point P139 (141.5285, -14.1576)
  point P140 (146.1365, -13.9383)
  point P141 (150.7679, -13.7022)
  point P142 (155.4191, -13.4499)
  point P143 (160.0853, -13.1829)
  point P144 (164.7617, -12.9024)
  point P145 (169.4444, -12.6099)
  point P146 (174.1283, -12.306)
  point P147 (178.8092, -11.9925)
  point P148 (183.4823, -11.67)
  point P149 (188.1434, -11.34)
  point P150 (192.7877, -11.0037)
  point P151 (197.4106, -10.6614)
  point P152 (202.0079, -10.3149)
  point P153 (206.5747, -9.9645)
  point P154 (211.1069, -9.6117)
  point P155 (215.5999, -9.2568)
  point P156 (220.0489, -8.9007)
  point P157 (228.7987, -8.1885)
  point P158 (233.0906, -7.8339)
  point P159 (237.3214, -7.4808)
  point P160 (241.4866, -7.1298)
  point P161 (245.5828, -6.7821)
  point P162 (249.6052, -6.4377)
  point P163 (253.5502, -6.0972)
  point P164 (257.4136, -5.7612)
  point P165 (261.1915, -5.4303)
  point P166 (264.88, -5.1051)
  point P167 (268.4758, -4.7856)
  point P168 (271.9747, -4.4724)
  point P169 (275.3734, -4.1661)
  point P170 (278.6686, -3.867)
  point P171 (281.8564, -3.5757)
  point P172 (284.9344, -3.2925)
  point P173 (287.8984, -3.018)
  point P174 (290.7463, -2.7525)
  point P175 (293.4745, -2.4963)
  point P176 (296.0806, -2.2503)
  point P177 (298.5616, -2.0142)
  point P178 (300.9151, -1.7892)
  point P179 (303.1387, -1.575)
  point P180 (305.23, -1.3728)
  point P181 (307.1866, -1.1823)
  point P182 (309.007, -1.0041)
  point P183 (310.6885, -0.8385)
  point P184 (312.2302, -0.6861)
  point P185 (313.6297, -0.5472)
  point P186 (314.8861, -0.4221)
  point P187 (315.9976, -0.3108)
  point P188 (316.9636, -0.2139)
  point P189 (317.7826, -0.1314)
  point P190 (318.4537, -0.0636)
  point P191 (318.9766, -0.0108)
  point P192 (319.3503, 0.027)
  point P193 (319.5743, 0.0498)
  point P194 (28.0055, 1.0054)
  point P195 (108.6496, 18.6359)
  point P196 (108.6496, -9.3641)
  point P197 (195.6498, 0.4359)
  point P198 (195.6498, 8.8359)
  point P199 (108.6496, 4.6359)
  dimension "d2" = 300.0001
  dimension "d18" = 6.686
  dimension "d19" = 110
  dimension "d22" = 100
  dimension "d23" = 7
  dimension "d24" = 5
  dimension "d25" = 5
  dimension "d30" = 28
  dimension "d31" = 8.4
  dimension "d33" = 14
  dimension "d34" = 2
  dimension "d37" = 23.918
  dimension "d44" = 198
  dimension "d46" = 59.8865
extrude "Extrusion7" add sketch "Sketch2" along normal blind 84.6667 contours A6 S0 L16 L14 L17
properties part number "2414 basic aerofoil" material "Polyurethane Foam"
